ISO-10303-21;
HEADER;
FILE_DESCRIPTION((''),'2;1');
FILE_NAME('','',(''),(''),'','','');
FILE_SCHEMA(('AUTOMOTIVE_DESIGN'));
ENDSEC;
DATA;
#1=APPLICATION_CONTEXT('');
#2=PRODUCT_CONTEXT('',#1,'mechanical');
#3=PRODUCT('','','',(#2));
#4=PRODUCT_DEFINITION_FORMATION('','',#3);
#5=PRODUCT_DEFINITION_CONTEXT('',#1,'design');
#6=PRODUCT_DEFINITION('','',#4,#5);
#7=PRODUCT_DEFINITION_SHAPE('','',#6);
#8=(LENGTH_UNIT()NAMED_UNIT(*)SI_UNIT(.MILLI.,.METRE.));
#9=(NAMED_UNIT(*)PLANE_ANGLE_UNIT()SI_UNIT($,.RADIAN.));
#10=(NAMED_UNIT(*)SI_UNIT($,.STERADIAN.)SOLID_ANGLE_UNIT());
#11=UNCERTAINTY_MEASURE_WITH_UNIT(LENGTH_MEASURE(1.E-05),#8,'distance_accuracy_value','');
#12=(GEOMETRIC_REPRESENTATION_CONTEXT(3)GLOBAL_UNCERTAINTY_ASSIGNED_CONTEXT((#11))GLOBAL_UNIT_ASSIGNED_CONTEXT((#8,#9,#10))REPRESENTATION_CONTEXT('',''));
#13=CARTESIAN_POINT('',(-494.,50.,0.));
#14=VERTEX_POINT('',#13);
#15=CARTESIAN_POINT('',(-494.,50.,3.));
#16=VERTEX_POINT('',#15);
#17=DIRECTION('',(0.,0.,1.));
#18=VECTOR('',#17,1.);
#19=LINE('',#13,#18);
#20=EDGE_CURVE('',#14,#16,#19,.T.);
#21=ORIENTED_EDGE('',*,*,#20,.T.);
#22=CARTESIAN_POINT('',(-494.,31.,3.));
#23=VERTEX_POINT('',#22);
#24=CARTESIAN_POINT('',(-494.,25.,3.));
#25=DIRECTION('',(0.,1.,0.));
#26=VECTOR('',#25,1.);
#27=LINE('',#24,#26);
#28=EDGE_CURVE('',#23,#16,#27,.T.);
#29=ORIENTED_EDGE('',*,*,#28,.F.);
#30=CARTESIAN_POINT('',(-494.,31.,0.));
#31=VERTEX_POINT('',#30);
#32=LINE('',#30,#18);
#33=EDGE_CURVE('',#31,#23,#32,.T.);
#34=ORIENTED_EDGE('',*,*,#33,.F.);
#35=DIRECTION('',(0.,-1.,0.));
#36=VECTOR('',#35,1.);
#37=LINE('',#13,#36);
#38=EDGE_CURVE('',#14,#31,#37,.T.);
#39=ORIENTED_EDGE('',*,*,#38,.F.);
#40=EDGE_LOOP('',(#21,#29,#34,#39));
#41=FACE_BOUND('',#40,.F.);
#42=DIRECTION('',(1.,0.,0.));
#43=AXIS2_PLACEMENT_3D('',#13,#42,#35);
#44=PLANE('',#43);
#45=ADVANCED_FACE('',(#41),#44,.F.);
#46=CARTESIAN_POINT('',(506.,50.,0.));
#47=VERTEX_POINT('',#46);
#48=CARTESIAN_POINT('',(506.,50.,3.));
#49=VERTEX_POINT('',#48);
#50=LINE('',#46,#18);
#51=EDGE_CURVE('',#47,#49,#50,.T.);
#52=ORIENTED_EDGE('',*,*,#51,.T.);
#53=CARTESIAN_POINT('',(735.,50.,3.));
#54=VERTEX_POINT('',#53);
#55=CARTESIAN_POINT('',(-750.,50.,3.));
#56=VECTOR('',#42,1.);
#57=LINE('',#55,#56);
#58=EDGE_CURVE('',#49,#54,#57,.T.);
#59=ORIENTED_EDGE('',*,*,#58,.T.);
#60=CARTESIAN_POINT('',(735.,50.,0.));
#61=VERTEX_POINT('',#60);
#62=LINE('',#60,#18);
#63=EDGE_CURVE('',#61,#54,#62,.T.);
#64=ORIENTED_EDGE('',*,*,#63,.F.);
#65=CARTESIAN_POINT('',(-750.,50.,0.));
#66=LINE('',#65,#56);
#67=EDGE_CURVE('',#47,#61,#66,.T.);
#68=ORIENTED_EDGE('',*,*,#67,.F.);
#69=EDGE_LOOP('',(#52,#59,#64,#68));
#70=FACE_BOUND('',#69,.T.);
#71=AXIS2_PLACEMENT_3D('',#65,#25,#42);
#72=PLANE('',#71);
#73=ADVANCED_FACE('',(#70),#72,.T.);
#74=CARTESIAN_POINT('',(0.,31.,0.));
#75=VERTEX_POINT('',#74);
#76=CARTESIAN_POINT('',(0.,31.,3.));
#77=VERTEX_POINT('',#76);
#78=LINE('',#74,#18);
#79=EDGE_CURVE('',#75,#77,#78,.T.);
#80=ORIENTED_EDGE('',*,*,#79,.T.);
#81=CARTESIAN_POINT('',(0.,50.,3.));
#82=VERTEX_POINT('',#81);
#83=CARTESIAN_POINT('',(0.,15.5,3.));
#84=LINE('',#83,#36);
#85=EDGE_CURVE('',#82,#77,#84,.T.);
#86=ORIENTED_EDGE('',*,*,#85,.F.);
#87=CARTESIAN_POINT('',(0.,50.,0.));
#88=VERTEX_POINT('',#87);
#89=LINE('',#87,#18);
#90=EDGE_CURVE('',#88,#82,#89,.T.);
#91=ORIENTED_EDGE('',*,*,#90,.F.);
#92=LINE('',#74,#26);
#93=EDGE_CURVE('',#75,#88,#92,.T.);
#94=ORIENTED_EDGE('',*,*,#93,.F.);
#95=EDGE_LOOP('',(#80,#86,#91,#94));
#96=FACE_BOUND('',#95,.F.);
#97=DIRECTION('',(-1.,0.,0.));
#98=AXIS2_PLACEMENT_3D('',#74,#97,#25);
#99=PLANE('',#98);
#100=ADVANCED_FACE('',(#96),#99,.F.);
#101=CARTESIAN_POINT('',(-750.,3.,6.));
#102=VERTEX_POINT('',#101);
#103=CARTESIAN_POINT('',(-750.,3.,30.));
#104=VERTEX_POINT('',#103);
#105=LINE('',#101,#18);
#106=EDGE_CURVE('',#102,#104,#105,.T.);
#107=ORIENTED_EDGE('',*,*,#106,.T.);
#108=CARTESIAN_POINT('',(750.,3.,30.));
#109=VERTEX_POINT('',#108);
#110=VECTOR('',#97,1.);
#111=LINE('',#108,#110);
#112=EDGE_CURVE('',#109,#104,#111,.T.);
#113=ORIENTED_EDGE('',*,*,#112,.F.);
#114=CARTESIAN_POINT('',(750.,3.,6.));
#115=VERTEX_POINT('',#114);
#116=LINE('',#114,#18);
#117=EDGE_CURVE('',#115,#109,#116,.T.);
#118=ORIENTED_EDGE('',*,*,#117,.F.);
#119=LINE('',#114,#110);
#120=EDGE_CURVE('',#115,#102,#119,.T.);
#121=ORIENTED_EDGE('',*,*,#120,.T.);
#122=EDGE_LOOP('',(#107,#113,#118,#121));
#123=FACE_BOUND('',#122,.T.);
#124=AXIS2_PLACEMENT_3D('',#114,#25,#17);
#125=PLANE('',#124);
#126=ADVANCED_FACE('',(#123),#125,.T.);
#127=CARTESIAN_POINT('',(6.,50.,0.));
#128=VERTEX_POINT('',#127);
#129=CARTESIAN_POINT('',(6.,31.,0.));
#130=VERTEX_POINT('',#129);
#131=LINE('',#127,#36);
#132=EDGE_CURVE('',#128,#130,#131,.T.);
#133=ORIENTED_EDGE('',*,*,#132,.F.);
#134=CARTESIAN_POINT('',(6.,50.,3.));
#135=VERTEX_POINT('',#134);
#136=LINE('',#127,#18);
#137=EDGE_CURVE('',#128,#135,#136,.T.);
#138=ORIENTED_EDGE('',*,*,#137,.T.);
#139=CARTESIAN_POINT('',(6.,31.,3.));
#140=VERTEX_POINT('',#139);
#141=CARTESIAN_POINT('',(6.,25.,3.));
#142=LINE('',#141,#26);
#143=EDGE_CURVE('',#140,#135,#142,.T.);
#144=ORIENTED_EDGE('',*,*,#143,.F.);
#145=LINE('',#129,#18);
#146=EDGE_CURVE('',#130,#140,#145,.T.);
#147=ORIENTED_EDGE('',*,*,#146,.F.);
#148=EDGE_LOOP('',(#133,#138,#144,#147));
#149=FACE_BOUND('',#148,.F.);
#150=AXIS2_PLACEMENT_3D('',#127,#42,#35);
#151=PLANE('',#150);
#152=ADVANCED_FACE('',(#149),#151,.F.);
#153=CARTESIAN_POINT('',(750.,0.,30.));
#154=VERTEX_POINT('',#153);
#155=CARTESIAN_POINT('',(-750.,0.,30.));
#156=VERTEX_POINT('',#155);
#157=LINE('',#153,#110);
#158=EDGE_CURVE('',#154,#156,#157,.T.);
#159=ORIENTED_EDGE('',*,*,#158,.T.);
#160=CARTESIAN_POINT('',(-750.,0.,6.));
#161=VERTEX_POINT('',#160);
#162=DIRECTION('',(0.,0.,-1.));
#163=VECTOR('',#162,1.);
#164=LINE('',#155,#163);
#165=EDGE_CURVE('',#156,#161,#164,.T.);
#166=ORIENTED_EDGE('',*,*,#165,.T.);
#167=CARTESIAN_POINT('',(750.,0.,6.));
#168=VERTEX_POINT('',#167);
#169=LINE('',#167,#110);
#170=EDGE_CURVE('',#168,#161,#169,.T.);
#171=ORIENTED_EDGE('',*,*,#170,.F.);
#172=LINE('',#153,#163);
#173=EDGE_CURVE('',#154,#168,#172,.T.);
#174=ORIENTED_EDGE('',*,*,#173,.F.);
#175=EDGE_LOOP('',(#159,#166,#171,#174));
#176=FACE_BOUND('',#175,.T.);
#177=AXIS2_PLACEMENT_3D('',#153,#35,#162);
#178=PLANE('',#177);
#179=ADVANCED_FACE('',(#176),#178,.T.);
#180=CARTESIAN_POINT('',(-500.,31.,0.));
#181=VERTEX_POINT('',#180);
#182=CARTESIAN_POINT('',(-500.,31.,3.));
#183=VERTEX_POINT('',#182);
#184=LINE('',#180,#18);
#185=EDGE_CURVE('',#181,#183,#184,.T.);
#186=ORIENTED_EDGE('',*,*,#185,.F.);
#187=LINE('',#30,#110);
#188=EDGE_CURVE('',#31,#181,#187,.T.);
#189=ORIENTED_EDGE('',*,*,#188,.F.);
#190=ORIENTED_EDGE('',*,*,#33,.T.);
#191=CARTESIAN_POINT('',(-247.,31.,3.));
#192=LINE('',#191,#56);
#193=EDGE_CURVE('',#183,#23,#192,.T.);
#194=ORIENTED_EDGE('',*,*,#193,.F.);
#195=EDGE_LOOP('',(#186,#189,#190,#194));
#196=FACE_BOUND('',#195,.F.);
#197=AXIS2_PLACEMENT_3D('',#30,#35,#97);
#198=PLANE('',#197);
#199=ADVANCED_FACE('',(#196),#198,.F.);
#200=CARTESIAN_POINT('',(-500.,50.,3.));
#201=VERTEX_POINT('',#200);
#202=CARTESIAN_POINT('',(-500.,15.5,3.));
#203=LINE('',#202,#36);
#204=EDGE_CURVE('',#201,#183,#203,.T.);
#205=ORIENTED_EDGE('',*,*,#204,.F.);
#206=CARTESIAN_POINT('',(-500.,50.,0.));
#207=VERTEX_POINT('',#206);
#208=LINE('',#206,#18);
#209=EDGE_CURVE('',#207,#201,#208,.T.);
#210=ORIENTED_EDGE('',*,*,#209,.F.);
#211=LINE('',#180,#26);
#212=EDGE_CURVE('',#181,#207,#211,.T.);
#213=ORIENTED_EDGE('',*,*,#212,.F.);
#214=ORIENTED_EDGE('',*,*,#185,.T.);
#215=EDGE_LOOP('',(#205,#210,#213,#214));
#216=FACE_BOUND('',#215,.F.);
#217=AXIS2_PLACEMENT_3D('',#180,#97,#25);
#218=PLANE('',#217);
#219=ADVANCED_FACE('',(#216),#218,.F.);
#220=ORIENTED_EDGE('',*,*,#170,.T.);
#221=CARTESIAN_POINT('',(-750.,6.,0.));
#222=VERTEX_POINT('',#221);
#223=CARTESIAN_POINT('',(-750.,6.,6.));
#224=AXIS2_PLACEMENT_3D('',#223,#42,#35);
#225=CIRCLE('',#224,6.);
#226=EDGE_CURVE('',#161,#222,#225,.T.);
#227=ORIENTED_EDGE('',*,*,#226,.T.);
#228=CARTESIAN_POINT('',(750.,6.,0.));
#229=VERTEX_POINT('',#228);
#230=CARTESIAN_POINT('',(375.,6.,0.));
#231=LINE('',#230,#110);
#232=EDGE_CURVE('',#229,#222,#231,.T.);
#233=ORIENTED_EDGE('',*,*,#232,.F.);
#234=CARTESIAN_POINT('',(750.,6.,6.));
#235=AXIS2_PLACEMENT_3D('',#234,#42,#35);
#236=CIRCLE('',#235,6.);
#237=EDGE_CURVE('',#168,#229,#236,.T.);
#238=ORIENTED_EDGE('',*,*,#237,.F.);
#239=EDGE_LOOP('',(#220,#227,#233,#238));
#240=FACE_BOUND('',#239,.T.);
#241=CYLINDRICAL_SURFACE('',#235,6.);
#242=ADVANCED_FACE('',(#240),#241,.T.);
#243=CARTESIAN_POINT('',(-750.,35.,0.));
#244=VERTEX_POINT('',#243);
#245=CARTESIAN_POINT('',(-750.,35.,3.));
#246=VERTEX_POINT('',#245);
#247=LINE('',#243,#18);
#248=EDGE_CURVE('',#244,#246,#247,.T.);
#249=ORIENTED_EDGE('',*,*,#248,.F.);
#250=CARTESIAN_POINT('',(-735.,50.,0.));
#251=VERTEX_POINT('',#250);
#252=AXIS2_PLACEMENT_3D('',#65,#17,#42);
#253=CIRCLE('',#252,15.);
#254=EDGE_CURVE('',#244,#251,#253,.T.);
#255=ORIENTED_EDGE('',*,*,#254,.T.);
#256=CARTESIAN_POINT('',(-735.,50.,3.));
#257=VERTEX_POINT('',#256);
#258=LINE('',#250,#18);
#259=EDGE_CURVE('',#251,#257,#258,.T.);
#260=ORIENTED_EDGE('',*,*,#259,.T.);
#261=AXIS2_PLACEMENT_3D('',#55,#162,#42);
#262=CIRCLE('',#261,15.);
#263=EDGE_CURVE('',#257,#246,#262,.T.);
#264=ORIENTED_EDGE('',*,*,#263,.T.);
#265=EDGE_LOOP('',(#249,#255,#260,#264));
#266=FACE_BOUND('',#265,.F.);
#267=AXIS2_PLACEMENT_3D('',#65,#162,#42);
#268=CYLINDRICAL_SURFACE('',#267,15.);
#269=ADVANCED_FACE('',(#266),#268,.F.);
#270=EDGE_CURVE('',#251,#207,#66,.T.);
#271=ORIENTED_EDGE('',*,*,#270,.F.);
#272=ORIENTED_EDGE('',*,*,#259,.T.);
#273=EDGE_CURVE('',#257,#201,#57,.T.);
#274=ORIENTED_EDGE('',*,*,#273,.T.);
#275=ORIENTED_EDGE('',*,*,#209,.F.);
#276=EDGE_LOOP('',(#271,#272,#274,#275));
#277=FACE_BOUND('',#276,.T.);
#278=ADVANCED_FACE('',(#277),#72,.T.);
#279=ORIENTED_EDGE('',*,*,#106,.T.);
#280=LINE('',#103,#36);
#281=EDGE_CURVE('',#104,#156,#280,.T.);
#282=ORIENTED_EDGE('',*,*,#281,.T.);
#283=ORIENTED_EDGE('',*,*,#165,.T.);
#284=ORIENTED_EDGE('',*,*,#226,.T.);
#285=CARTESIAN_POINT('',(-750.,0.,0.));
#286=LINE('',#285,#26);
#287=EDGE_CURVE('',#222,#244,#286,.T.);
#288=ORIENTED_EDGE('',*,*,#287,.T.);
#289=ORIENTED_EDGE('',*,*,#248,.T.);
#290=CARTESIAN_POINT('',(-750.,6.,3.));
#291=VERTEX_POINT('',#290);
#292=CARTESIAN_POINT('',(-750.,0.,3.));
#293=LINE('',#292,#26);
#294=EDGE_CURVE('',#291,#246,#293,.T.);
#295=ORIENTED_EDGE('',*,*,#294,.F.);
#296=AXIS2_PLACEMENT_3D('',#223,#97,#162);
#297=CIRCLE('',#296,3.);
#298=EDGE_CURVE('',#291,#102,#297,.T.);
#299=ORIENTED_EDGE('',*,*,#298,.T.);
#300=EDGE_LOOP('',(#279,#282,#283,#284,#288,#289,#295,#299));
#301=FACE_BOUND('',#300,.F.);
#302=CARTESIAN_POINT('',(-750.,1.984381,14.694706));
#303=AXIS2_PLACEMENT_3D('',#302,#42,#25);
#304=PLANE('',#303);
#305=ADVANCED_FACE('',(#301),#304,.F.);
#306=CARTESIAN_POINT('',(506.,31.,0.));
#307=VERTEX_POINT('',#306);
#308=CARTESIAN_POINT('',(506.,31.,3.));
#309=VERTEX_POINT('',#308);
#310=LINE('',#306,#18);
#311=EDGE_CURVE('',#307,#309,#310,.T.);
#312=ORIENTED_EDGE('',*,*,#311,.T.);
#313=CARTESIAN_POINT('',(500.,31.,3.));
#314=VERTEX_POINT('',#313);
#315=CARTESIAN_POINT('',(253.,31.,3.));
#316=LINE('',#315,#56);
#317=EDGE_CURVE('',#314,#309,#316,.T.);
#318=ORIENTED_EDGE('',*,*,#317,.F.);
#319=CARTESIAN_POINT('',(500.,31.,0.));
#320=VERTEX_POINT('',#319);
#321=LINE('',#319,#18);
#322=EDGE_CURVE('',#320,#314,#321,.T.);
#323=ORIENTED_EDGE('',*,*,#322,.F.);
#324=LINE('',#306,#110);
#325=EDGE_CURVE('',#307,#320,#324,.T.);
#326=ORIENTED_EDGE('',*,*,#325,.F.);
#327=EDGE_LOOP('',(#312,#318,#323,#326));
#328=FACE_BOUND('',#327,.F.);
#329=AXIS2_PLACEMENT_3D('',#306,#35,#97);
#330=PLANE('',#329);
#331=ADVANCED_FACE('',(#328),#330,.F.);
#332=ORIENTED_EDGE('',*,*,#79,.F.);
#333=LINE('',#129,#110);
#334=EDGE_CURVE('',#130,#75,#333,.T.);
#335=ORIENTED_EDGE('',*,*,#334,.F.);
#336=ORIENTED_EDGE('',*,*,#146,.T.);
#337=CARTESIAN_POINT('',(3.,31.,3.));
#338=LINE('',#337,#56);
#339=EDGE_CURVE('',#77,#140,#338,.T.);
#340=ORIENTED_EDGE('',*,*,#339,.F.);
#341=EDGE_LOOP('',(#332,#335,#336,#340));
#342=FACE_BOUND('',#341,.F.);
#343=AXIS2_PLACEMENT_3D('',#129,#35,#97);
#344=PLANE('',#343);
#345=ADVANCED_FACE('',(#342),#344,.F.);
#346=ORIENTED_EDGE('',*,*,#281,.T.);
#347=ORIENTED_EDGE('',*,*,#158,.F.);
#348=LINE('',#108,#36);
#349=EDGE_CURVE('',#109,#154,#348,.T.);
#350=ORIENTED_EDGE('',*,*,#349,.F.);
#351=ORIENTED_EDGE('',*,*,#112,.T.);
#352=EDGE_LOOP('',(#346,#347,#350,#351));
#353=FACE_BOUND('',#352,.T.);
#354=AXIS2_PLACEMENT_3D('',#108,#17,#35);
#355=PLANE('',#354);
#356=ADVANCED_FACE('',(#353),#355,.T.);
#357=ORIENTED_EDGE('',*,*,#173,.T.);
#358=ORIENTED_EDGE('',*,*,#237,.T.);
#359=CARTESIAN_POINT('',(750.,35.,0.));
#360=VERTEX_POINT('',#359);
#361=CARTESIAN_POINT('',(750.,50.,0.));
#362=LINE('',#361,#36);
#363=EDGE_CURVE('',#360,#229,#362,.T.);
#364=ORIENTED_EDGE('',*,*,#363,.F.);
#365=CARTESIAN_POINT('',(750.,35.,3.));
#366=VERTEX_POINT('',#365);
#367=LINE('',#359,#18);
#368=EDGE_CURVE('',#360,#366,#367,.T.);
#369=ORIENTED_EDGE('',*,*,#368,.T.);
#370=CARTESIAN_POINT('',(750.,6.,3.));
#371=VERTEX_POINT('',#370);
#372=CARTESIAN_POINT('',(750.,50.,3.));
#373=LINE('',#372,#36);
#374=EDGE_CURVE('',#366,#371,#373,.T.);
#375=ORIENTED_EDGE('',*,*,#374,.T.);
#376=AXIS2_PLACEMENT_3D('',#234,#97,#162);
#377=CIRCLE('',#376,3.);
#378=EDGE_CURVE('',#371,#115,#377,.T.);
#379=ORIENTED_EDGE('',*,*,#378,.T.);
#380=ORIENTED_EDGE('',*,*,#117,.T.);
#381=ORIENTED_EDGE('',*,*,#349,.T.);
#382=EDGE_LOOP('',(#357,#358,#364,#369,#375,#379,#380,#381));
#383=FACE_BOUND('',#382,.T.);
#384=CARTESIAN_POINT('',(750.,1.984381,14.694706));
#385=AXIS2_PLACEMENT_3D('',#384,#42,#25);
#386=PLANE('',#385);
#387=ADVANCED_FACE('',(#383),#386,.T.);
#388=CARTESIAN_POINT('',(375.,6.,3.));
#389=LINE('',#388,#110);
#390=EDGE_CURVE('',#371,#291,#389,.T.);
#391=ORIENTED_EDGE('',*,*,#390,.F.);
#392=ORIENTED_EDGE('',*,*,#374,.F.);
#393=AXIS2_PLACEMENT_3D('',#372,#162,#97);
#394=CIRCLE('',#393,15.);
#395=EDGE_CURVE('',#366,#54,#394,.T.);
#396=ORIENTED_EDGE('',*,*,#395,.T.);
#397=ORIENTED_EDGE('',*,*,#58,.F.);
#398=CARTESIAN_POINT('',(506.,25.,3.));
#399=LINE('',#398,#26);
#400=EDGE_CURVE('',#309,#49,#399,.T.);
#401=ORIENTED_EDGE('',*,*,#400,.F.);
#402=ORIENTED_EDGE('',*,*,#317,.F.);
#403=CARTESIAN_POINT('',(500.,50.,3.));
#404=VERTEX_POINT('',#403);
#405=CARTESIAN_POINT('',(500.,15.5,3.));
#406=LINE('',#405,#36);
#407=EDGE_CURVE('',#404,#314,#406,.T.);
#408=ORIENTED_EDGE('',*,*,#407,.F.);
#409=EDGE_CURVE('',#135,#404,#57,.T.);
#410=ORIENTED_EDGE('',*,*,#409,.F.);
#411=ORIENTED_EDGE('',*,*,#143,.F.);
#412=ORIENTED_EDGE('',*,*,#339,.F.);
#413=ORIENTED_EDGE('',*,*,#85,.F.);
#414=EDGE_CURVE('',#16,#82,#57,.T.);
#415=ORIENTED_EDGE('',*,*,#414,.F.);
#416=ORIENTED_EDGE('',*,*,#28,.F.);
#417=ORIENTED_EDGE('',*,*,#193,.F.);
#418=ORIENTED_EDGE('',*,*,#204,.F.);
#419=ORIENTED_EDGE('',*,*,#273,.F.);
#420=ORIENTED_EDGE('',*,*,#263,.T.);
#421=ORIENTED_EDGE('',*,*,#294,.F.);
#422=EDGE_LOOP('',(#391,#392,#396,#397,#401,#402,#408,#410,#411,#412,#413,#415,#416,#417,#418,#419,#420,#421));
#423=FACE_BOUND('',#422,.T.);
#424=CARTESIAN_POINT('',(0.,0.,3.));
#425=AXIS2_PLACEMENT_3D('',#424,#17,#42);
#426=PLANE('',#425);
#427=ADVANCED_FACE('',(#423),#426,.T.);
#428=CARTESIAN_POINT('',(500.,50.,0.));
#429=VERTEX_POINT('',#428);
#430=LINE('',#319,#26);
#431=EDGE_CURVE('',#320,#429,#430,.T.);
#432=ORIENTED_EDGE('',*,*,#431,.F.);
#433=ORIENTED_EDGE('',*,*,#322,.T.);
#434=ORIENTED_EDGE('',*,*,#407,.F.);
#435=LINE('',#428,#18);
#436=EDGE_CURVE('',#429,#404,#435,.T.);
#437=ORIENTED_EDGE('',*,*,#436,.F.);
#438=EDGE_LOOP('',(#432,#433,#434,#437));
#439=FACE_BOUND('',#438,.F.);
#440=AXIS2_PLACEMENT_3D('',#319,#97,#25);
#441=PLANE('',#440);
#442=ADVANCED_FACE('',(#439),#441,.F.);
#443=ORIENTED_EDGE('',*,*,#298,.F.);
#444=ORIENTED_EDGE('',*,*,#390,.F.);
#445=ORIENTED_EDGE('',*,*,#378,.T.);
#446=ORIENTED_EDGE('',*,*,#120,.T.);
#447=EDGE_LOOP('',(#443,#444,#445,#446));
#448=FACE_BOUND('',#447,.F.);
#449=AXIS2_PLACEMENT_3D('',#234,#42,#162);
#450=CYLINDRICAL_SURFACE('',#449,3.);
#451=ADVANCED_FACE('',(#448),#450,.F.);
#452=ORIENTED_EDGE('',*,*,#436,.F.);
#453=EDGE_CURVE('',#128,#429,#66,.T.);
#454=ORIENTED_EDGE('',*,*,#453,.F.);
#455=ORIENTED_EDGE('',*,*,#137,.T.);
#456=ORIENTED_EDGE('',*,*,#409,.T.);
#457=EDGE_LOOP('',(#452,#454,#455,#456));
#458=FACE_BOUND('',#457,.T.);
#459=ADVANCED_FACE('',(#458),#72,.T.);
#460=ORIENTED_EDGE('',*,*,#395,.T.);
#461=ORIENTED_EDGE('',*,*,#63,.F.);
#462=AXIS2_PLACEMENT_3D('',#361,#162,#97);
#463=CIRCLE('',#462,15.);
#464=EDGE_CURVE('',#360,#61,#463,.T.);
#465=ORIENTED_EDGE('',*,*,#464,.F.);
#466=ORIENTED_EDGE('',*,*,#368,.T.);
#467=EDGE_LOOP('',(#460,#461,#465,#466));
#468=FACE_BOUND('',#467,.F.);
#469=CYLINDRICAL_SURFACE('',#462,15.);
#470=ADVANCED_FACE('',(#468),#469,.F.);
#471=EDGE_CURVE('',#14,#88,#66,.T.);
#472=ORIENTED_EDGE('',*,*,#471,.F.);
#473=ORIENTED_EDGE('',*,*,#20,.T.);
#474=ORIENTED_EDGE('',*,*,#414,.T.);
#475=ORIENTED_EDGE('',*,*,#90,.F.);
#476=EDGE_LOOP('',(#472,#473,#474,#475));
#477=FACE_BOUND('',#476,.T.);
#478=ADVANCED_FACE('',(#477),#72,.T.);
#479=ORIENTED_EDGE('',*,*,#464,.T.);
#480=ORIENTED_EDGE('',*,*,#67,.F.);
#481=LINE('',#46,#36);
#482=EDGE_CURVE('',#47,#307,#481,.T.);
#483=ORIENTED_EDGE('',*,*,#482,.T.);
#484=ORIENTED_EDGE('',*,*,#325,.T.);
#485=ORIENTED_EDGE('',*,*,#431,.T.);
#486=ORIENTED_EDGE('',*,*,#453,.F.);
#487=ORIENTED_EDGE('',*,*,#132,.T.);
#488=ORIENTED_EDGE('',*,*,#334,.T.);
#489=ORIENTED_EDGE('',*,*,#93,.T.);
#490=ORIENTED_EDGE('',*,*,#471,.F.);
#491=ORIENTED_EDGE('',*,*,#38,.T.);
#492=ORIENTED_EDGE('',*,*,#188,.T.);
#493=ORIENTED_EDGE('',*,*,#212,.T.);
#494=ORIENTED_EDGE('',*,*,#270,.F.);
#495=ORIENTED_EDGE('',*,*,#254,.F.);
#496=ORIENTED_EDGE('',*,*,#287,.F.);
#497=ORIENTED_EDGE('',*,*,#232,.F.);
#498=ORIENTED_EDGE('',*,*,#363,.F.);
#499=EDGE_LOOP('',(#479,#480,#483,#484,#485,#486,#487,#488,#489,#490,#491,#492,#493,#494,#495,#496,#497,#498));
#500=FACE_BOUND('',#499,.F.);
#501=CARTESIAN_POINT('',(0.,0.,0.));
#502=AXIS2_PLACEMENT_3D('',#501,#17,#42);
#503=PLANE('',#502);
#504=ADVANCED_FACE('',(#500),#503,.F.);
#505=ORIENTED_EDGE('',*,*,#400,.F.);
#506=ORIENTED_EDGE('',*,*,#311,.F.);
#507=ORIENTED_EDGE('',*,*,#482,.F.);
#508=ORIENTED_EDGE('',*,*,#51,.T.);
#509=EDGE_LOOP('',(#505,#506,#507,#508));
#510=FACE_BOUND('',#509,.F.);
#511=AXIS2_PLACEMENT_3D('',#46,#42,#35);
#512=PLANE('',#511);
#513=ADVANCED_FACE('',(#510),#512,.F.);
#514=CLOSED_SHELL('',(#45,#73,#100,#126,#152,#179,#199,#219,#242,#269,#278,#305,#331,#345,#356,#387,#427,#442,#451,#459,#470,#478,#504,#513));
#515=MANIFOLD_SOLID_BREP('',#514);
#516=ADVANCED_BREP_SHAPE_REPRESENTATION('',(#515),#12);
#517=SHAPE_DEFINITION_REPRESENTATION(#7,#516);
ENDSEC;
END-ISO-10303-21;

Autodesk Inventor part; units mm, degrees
ref_plane "YZ Plane" through (0, 0, 0) normal (1, 0, 0) x (0, 1, 0)
ref_plane "XZ Plane" through (0, 0, 0) normal (0, 1, 0) x (-1, 0, 0)
ref_plane "XY Plane" through (0, 0, 0) normal (0, 0, 1) x (1, 0, 0)
sketch "Sketch1" plane through (0, 0, 0) normal (0, 0, 1) x (1, 0, 0)
  line L0 (-750, 50) -> (750, 50)
  line L1 (750, 50) -> (750, 0)
  line L2 (750, 0) -> (-750, 0)
  line L3 (-750, 0) -> (-750, 50)
  point P0 (0, 0)
  point P1 (0, 0)
  dimension "d0" = 1500
  dimension "d1" = 50
extrude "Plate1" add sketch "Sketch1" along normal blind 3
sketch "Sketch2" plane through (750, 3, 0) normal (0, -1, 0) x (1, 0, 0)
  line L0 (-1500, 0) -> (0, 0)
  line L1 (0, 0) -> (0, 30)
  line L2 (0, 30) -> (-1500, 30)
  line L3 (-1500, 30) -> (-1500, 0)
edge flange "Flange1" height 30 angle 90 thickness 3 bend radius 3 thickness toward (0, -1, 0) relief tear relief width 3 relief depth 1.5 edges at (0, 0, 3) wall of the first edge with corners at (-750, 3, 0) (750, 3, 0) (750, 3, 30) (-750, 3, 30)
bend "Bend1"
corner "Corner1"
sketch "Sketch5" plane through (0, 0, 0) normal (0, 0, -1) x (-1, 0, 0)
  line L0 (750, 50) -> (-750, 50) projected
  line L1 (494, 50) -> (494, 31)
  line L2 (494, 31) -> (500, 31)
  line L3 (500, 31) -> (500, 50)
  line L4 (750, 0) -> (-750, 0) projected
  point P0 (0, 0)
  dimension "d18" = 6
  dimension "d19" = 250
  dimension "d20" = 31
extrude "Extrusion1" cut sketch "Sketch5" against normal through all
pattern_linear "Rectangular Pattern1" count 3 spacing 500 along (1, 0, 0) of "Extrusion1"
sketch "Sketch6" plane through (0, 0, 0) normal (0, 0, -1) x (-1, 0, 0)
  line L0 (-750, 50) -> (-750, 6) projected
  circle A0 centre (-750, 50) radius 15
  line L1 (-750, 50) -> (-506, 50) projected
  point P0 (0, 0)
  point P1 (-735, 50)
  point P2 (-750, 35)
  dimension "d24" = 30
extrude "Extrusion2" cut sketch "Sketch6" against normal through all contours L1 A0 L0 picked at (-740.1254, 48.8874)
mirror "Mirror1" about plane through (0, 0, 0) normal (1, 0, 0) of "Extrusion2"
equation "\"d1\" = Стрингер_1"
equation "\"d18\" = 2 * Thickness"
equation "\"d2\" = Thickness"
equation "\"d3\" = BendReliefWidth"
equation "\"d4\" = BendReliefDepth"
equation "\"d5\" = MinimumRemnant"
equation "\"d6\" = TransitionRadius"
equation "\"d9\" = BendRadius"
equation "\"d10\" = CornerReliefSize"
equation "\"d11\" = GapSize"
equation "\"d12\" = JacobiRadiusSize"
equation "\"BendRadius\" = Thickness"
equation "\"BendReliefWidth\" = Thickness"
equation "\"BendReliefDepth\" = 0.5 * Thickness"
equation "\"CornerReliefSize\" = 4 * Thickness"
equation "\"MinimumRemnant\" = 2 * Thickness"
equation "\"TransitionRadius\" = BendRadius"
equation "\"JacobiRadiusSize\" = BendRadius"
equation "\"GapSize\" = Thickness"
equation "\"qqqqqq\" = 67.35706"
equation "\"Стрингер_1\" = 50"
equation "\"Thickness\" = 3"
properties part number "МОО 051 стрингер спина 11"
